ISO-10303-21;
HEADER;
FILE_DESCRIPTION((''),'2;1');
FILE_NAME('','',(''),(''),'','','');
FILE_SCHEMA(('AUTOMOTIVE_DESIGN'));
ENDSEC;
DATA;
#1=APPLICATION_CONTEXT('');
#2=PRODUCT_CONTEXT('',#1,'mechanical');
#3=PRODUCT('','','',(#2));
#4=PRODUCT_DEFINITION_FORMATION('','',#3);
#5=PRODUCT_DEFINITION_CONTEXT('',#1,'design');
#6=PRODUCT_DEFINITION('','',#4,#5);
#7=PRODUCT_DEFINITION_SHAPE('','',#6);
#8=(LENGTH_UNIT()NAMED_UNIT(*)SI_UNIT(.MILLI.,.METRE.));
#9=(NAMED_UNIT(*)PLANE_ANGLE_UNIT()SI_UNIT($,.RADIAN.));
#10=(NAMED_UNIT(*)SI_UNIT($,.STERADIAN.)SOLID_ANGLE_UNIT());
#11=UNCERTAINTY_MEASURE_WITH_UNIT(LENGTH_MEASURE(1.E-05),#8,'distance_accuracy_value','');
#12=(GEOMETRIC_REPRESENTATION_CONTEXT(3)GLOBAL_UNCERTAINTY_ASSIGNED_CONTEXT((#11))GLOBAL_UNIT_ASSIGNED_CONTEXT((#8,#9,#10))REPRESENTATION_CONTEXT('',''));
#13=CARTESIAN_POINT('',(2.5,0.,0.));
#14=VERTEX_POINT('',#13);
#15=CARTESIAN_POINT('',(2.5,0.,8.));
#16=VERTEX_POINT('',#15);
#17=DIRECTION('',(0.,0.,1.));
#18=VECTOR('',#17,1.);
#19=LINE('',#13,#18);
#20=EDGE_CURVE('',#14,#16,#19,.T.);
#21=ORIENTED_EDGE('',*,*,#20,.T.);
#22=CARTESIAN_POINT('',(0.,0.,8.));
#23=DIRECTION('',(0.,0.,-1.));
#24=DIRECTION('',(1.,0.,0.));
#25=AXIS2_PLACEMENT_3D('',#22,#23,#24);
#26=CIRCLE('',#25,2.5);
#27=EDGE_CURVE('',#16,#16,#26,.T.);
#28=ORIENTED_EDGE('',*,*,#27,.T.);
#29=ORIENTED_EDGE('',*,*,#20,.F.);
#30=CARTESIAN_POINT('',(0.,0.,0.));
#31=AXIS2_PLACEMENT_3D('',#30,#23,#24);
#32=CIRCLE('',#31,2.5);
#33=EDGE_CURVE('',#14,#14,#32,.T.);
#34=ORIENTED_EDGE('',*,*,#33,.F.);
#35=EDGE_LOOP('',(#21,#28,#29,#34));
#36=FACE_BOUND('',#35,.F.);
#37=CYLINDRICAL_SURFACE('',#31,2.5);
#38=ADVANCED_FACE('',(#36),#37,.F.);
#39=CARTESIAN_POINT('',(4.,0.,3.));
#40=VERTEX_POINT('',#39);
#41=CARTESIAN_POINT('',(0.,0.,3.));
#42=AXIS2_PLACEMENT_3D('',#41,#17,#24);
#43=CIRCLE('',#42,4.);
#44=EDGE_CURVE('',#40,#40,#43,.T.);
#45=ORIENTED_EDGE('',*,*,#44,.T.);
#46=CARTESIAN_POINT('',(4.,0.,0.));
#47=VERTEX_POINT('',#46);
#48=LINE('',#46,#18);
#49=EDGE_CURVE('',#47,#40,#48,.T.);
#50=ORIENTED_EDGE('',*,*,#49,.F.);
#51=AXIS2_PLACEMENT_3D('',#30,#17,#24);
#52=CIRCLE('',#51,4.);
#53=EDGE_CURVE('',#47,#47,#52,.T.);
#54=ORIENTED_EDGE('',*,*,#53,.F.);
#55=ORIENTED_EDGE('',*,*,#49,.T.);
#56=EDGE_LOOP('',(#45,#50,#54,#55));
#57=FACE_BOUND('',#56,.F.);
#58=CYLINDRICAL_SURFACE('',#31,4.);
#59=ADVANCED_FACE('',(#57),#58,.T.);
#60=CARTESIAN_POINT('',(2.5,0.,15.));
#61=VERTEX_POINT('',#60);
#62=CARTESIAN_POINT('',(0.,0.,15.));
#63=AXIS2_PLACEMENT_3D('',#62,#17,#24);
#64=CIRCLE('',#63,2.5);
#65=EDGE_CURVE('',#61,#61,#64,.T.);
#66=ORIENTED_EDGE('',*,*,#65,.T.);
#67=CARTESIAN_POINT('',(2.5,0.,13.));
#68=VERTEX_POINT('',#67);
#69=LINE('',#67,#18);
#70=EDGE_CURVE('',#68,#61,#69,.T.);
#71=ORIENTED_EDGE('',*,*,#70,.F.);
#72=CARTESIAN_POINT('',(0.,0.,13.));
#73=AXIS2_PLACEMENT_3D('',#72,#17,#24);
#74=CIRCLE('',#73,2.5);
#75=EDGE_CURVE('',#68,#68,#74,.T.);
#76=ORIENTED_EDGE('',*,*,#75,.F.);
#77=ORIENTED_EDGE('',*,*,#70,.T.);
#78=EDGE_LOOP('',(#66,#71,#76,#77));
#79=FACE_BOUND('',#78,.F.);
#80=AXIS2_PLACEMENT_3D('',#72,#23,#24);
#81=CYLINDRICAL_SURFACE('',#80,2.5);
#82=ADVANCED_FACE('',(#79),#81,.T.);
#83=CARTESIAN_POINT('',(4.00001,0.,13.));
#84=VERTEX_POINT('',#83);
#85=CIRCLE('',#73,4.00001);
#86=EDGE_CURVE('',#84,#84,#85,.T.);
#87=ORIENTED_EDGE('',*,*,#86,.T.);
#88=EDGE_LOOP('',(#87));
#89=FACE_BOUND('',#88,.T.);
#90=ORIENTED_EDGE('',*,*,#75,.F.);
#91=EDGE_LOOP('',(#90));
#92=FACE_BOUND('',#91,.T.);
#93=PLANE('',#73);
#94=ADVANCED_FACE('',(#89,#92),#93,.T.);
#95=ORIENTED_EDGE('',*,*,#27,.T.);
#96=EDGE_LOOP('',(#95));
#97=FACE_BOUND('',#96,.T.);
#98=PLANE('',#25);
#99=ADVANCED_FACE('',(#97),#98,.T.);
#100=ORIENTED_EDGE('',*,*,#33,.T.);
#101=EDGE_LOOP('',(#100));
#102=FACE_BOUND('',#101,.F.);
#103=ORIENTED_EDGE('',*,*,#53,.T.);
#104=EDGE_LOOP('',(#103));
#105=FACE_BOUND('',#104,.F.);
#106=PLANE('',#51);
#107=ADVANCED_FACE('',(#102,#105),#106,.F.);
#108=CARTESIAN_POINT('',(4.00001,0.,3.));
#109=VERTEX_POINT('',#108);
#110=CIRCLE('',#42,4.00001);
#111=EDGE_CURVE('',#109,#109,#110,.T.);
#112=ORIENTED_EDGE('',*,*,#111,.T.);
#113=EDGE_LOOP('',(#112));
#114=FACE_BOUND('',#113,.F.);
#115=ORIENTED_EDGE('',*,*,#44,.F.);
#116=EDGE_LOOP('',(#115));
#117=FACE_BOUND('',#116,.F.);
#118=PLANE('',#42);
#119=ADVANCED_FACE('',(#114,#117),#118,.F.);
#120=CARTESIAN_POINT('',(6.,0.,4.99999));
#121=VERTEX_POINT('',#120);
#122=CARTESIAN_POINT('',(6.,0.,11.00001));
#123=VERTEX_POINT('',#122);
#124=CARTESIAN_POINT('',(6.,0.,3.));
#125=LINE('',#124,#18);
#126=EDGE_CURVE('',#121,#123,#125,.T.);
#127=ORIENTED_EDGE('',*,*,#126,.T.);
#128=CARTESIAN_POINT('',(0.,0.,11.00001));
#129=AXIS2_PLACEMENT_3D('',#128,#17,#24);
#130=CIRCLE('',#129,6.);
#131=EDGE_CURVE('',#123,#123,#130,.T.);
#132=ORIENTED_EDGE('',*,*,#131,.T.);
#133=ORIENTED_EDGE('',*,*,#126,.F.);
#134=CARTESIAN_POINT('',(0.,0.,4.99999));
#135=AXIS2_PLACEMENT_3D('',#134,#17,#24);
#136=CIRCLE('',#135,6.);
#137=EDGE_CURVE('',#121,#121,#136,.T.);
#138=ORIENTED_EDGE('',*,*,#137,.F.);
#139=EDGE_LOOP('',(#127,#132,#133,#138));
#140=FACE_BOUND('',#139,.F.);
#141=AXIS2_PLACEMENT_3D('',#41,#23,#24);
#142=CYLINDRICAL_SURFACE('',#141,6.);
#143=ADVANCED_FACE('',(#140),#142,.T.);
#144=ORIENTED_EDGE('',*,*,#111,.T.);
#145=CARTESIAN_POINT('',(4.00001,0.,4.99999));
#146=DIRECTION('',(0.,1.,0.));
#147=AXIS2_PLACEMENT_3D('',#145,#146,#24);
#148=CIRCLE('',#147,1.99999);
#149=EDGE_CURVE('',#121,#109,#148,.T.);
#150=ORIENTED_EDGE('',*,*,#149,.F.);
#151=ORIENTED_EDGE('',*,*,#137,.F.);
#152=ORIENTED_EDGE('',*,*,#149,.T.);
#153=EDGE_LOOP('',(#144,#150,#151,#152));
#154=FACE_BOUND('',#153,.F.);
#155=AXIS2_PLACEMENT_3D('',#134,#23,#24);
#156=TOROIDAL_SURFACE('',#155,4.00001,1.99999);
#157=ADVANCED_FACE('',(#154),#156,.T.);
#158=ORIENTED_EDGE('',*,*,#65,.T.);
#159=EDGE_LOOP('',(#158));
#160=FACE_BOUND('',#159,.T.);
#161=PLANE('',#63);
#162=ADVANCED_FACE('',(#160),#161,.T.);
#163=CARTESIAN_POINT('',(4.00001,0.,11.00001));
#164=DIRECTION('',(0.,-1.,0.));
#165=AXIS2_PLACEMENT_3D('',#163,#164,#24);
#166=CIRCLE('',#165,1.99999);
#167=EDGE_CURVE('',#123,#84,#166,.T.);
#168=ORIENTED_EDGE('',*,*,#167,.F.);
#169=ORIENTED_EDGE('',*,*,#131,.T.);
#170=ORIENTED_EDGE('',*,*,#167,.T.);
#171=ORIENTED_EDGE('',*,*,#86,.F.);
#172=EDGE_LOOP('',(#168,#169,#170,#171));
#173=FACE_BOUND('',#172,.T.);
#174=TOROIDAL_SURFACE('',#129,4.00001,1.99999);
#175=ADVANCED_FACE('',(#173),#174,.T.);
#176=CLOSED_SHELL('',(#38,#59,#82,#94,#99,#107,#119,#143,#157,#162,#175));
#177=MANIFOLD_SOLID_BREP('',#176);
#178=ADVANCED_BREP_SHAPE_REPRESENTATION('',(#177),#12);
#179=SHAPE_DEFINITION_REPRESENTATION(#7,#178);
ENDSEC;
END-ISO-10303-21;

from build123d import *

# Parameters (mm, degrees)
F0_R     = 4
F1_DEPTH = 3
F2_R     = 6
F3_DEPTH = 10
F4_R     = 2.5
F5_DEPTH = 2
F6_R     = 1.99999
F7_R     = 2.5
F8_DEPTH = 8


# Not quite as in the source:
# - a fillet or chamfer is up to 0.001 mm smaller than in the source, because OpenCascade refuses the exact size


with BuildPart() as f1:
    # F0 (on Top) → F1 (new body)
    with BuildSketch(Plane.XY):
        Circle(F0_R)
    extrude(amount=F1_DEPTH)

    # F2 (on face) → F3 (join)
    with BuildSketch(Plane.XY.offset(3)):
        Circle(F2_R)
    extrude(amount=F3_DEPTH)

    # F4 (on face) → F5 (join)
    with BuildSketch(Plane.XY.offset(13)):
        Circle(F4_R)
    extrude(amount=F5_DEPTH)

    # F6 (radius 2 in the source; OpenCascade refuses exactly that, so slightly less here)
    f6_edges = [f1.edges().sort_by_distance(p)[0] for p in [
        (-6, 0, 13),
        (-6, 0, 3),
    ]]
    fillet(f6_edges, radius=F6_R)

    # F7 (on face) → F8 (cut)
    with BuildSketch(Plane(origin=(0, 0, 0), x_dir=(1, 0, 0), z_dir=(0, 0, -1))):
        Circle(F7_R)
    extrude(amount=-F8_DEPTH, mode=Mode.SUBTRACT)


solid = f1.part
